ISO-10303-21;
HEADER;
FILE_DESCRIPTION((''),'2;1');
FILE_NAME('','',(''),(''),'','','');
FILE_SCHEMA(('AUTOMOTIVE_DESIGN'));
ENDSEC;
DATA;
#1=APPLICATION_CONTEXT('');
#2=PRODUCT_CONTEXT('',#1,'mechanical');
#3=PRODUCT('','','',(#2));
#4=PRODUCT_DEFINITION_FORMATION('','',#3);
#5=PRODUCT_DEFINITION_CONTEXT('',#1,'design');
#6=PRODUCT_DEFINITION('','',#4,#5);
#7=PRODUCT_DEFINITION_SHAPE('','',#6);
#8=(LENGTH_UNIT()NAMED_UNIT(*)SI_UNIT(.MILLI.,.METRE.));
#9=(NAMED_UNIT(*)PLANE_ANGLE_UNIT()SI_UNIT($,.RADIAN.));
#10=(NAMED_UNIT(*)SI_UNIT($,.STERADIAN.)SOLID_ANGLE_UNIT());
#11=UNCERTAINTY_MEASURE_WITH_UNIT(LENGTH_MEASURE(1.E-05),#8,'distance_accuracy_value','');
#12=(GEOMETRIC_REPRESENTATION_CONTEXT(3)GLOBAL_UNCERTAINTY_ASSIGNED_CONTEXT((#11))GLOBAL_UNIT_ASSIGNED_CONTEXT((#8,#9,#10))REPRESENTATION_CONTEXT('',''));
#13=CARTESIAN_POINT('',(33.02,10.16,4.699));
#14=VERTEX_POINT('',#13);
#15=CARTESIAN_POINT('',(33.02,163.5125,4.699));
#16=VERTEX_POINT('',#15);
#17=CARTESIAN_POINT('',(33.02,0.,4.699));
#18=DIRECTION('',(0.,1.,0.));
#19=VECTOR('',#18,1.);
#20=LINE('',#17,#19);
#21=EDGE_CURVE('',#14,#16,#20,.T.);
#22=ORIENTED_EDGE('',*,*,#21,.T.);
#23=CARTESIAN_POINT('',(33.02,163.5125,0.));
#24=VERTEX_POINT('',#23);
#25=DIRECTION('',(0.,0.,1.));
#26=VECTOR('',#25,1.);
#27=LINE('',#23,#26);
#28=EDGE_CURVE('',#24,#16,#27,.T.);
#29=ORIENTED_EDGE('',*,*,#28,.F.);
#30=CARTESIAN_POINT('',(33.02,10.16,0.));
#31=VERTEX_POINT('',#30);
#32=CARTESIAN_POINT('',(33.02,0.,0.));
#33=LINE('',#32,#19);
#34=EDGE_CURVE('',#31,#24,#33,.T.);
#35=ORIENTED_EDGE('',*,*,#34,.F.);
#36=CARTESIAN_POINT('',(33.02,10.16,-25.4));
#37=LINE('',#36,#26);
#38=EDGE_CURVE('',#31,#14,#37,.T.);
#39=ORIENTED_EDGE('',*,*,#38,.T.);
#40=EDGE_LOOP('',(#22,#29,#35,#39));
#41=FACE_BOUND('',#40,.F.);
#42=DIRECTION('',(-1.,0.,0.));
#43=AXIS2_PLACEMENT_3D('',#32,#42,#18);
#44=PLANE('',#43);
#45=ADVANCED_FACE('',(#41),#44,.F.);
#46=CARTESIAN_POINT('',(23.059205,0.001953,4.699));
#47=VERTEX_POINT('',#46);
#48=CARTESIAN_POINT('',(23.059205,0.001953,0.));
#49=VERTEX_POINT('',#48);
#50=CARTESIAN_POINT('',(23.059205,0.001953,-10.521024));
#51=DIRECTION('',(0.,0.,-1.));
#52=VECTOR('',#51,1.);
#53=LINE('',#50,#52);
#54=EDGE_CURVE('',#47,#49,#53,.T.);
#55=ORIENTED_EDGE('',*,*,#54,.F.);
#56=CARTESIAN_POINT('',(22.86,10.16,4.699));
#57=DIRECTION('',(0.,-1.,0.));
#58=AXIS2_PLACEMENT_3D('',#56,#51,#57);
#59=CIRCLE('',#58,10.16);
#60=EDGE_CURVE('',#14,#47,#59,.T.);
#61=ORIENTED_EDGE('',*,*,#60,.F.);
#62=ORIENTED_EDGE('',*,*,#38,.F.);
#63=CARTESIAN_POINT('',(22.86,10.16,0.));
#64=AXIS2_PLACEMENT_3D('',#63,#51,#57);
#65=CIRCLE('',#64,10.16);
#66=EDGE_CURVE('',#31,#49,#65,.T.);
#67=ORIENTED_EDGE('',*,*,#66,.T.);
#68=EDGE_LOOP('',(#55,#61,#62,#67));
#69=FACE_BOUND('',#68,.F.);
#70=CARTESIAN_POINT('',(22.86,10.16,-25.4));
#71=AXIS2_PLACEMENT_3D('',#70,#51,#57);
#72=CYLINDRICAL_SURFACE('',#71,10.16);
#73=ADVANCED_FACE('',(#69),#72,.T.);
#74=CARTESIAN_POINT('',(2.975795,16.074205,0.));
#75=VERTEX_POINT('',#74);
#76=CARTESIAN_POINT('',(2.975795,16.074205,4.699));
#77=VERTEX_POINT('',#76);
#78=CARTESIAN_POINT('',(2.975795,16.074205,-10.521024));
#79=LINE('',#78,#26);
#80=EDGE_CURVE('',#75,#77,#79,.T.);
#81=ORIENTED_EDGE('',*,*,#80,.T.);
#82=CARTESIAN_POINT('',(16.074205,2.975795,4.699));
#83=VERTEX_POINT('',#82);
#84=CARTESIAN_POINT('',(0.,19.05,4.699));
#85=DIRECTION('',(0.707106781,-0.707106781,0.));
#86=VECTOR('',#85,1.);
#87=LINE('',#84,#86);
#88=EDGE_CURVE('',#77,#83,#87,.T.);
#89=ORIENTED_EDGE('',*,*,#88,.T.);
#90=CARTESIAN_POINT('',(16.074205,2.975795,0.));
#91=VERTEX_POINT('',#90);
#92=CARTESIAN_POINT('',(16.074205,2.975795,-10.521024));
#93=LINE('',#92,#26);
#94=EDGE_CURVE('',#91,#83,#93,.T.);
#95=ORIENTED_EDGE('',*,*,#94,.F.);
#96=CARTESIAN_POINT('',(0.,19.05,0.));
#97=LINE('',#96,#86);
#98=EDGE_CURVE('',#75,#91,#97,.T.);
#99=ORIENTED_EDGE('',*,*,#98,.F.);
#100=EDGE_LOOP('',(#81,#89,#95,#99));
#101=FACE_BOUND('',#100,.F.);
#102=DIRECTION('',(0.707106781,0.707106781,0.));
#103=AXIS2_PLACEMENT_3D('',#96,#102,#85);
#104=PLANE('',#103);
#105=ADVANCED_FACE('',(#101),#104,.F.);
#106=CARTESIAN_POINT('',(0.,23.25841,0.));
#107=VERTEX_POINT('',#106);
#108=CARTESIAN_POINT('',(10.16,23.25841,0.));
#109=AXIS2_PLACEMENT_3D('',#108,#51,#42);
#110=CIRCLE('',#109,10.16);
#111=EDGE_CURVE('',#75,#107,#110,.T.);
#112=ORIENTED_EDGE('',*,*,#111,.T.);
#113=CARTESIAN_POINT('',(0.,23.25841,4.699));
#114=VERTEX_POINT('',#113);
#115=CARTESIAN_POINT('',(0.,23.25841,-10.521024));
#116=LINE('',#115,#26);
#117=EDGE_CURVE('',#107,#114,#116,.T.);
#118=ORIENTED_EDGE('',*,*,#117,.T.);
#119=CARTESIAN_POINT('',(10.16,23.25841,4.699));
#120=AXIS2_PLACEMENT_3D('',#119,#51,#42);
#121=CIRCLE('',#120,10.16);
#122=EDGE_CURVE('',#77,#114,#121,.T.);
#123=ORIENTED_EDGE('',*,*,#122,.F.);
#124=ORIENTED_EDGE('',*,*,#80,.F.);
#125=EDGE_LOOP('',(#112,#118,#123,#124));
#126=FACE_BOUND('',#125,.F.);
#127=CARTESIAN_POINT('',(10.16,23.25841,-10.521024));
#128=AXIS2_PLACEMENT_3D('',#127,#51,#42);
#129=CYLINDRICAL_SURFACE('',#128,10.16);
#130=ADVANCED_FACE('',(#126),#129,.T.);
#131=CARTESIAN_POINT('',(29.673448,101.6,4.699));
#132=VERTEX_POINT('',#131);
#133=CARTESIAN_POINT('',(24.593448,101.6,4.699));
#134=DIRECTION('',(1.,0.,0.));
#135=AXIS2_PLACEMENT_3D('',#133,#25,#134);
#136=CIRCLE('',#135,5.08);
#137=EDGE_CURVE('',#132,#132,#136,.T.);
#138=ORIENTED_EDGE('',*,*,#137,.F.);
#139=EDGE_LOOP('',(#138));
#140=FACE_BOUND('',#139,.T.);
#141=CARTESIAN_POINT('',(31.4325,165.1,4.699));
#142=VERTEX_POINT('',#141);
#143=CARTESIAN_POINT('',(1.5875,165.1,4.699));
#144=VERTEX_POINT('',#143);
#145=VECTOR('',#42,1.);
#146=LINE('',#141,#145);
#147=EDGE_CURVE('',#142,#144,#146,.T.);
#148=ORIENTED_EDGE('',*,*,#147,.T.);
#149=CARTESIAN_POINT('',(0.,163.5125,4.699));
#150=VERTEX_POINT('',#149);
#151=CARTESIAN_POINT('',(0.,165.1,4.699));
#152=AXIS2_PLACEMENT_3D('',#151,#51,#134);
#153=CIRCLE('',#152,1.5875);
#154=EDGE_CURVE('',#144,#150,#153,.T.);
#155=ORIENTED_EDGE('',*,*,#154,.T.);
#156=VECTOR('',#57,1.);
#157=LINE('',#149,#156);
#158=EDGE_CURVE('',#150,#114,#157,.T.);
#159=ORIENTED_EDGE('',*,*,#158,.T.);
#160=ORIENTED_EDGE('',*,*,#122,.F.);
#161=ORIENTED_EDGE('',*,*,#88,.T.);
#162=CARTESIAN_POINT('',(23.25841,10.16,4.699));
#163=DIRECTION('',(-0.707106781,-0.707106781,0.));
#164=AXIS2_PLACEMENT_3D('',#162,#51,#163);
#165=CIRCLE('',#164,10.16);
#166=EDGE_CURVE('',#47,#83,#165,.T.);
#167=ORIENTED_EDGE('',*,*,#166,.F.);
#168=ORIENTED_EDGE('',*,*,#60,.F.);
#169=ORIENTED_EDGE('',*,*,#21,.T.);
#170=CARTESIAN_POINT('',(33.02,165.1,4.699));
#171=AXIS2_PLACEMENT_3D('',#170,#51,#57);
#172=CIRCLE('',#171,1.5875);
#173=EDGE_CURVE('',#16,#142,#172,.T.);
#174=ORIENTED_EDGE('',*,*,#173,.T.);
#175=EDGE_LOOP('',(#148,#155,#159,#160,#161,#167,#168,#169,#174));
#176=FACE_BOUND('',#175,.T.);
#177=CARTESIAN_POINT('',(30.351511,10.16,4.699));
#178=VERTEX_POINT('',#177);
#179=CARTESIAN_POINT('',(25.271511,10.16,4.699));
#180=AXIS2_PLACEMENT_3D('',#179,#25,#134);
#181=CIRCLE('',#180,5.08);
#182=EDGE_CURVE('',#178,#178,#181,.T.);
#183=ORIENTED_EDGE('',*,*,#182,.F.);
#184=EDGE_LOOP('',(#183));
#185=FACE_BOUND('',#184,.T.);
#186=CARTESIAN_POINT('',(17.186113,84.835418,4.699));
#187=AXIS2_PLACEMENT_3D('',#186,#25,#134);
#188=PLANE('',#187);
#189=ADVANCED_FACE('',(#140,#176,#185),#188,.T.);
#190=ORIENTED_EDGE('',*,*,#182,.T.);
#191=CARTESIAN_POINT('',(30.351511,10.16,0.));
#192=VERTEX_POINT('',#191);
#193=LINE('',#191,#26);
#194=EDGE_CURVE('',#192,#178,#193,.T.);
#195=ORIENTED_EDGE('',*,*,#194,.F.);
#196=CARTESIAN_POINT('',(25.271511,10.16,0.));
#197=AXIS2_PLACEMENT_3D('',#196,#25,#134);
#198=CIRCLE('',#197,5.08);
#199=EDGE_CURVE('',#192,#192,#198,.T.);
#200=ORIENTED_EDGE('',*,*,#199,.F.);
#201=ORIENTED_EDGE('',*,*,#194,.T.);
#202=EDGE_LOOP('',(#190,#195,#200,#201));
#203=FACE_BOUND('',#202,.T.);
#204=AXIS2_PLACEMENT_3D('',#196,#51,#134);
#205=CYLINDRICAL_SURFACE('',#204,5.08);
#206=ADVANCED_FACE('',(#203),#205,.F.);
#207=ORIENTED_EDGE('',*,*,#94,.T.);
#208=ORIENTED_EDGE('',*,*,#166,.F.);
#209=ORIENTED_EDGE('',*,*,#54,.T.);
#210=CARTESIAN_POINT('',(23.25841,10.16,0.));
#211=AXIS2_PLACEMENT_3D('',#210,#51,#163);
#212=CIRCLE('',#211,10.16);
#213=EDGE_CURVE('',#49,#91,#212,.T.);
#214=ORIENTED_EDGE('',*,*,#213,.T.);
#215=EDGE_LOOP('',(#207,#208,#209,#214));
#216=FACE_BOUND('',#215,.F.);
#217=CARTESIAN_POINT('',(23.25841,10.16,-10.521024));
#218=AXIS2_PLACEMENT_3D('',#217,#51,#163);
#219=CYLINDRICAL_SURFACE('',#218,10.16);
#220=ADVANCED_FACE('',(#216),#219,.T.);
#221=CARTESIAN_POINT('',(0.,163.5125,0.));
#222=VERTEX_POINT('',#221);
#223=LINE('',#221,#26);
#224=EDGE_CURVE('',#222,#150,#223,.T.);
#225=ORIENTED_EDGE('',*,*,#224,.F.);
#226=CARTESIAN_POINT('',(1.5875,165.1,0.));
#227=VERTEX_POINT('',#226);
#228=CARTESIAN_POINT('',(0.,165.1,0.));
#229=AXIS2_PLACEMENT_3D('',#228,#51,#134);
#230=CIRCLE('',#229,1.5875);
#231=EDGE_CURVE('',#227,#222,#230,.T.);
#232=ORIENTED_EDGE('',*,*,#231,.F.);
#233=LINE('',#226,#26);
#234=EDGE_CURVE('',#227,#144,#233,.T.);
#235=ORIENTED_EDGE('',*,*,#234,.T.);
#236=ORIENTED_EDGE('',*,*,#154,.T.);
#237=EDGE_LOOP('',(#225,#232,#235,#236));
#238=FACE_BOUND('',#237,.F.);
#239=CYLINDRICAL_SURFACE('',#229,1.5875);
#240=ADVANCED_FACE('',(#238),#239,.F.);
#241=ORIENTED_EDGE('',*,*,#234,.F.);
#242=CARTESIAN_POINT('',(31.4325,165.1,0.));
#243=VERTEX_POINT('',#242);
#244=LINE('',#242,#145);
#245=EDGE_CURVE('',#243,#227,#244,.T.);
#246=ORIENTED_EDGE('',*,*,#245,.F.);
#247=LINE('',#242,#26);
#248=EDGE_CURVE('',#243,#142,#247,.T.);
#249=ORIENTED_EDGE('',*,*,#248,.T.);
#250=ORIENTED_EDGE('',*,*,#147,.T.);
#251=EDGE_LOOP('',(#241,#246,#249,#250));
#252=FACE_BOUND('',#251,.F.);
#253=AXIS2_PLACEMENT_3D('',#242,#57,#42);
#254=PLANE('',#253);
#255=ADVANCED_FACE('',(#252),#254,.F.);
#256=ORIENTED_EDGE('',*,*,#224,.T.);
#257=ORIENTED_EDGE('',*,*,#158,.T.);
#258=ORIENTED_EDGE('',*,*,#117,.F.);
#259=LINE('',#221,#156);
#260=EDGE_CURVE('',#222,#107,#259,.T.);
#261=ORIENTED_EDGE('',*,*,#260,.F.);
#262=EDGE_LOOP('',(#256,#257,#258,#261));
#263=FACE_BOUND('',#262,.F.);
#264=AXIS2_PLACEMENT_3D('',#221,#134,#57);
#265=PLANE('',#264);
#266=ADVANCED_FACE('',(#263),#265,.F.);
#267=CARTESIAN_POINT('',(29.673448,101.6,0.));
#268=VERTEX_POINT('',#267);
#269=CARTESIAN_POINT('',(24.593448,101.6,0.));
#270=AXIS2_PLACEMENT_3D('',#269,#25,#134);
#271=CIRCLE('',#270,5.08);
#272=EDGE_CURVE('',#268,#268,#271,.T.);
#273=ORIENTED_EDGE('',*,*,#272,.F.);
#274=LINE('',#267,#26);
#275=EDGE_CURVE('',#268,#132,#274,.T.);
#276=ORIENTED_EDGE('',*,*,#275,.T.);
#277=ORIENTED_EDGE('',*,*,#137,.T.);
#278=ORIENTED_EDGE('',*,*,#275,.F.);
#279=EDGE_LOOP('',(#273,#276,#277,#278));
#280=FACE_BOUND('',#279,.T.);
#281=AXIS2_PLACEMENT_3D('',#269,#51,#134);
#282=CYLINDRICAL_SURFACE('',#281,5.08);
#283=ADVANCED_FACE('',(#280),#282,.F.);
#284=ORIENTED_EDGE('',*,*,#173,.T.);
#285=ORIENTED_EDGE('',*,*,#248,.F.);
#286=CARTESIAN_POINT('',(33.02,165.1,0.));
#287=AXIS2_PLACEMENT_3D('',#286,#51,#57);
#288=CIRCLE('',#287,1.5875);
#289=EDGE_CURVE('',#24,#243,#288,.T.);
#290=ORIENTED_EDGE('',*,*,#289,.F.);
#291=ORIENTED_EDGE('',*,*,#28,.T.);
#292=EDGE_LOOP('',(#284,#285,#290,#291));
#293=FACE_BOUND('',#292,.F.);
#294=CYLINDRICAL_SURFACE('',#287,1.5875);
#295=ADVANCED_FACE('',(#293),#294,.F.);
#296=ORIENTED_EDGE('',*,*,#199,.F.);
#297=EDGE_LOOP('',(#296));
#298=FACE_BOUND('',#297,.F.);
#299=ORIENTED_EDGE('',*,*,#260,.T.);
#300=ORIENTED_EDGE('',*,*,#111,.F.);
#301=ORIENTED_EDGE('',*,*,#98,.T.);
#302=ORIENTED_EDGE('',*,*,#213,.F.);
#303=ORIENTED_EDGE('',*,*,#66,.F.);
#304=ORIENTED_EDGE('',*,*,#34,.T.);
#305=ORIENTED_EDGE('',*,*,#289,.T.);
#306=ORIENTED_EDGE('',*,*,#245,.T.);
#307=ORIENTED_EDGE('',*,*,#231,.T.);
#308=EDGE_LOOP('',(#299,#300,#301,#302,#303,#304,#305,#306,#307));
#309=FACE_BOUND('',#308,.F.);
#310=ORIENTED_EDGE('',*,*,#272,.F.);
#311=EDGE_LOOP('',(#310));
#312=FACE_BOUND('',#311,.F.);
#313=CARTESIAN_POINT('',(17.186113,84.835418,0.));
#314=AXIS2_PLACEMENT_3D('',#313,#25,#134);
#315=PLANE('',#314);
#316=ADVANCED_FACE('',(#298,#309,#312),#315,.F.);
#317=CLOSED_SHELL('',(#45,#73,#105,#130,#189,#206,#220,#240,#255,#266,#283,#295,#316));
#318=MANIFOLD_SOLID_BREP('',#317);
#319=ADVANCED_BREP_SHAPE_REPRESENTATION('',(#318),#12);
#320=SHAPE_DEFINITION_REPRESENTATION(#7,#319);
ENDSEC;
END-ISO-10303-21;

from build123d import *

# Parameters (mm, degrees)
F0_R        = 5.08
F1_DEPTH    = 4.699
F2_T1_DEPTH = 25.7410489686
F2_T3_DEPTH = 55.499


# Not quite as in the source:
# - a fillet or chamfer that OpenCascade refuses, or shapes differently, is made with other operations: its cross-section is extruded or revolved along the edge and cut away or added
# - a feature names something its author has since deleted; it is built from what else it names


with BuildPart() as f1:
    # F0 (on Top) → F1 (new body)
    with BuildSketch(Plane.XY):
        with BuildLine():
            Line((31.4325, 165.1), (1.5875, 165.1))
            ThreePointArc((1.5875, 165.1), (1.1225320151, 163.9774679849), (0, 163.5125))
            Line((0, 163.5125), (0, 19.05))
            Line((0, 19.05), (19.05, 0))
            Line((19.05, 0), (33.02, 0))
            Line((33.02, 0), (33.02, 163.5125))
            ThreePointArc((33.02, 163.5125), (31.8974679849, 163.9774679849), (31.4325, 165.1))
        make_face()
        with Locations((25.2715107054, 10.16)):
            Circle(F0_R, mode=Mode.SUBTRACT)
        with Locations((24.5934482664, 101.6)):
            Circle(F0_R, mode=Mode.SUBTRACT)
    extrude(amount=F1_DEPTH)

    # F2: fillet of radius 10.16 on 3 edges, made by hand

    # F2_s2 → F2_t1 (cut)
    with BuildSketch(Plane.XY.offset(-10.5210244843)):
        with BuildLine():
            ThreePointArc((0, 23.2584097937), (0.7733839497, 19.3703461209), (2.9757951031, 16.0742048969))
            Line((2.9757951031, 16.0742048969), (0, 19.05))
            Line((0, 19.05), (0, 23.2584097937))
        make_face()
        with BuildLine():
            ThreePointArc((16.0742048969, 2.9757951031), (19.3703461209, 0.7733839497), (23.2584097937, 0))
            Line((23.2584097937, 0), (19.05, 0))
            Line((19.05, 0), (16.0742048969, 2.9757951031))
        make_face()
    extrude(amount=F2_T1_DEPTH, mode=Mode.SUBTRACT)

    # F2_s4 → F2_t3 (cut)
    with BuildSketch(Plane.XY.offset(-25.4)):
        with BuildLine():
            ThreePointArc((22.86, 0), (30.0442048969, 2.9757951031), (33.02, 10.16))
            Line((33.02, 10.16), (33.02, 0))
            Line((33.02, 0), (22.86, 0))
        make_face()
    extrude(amount=F2_T3_DEPTH, mode=Mode.SUBTRACT)


solid = f1.part
